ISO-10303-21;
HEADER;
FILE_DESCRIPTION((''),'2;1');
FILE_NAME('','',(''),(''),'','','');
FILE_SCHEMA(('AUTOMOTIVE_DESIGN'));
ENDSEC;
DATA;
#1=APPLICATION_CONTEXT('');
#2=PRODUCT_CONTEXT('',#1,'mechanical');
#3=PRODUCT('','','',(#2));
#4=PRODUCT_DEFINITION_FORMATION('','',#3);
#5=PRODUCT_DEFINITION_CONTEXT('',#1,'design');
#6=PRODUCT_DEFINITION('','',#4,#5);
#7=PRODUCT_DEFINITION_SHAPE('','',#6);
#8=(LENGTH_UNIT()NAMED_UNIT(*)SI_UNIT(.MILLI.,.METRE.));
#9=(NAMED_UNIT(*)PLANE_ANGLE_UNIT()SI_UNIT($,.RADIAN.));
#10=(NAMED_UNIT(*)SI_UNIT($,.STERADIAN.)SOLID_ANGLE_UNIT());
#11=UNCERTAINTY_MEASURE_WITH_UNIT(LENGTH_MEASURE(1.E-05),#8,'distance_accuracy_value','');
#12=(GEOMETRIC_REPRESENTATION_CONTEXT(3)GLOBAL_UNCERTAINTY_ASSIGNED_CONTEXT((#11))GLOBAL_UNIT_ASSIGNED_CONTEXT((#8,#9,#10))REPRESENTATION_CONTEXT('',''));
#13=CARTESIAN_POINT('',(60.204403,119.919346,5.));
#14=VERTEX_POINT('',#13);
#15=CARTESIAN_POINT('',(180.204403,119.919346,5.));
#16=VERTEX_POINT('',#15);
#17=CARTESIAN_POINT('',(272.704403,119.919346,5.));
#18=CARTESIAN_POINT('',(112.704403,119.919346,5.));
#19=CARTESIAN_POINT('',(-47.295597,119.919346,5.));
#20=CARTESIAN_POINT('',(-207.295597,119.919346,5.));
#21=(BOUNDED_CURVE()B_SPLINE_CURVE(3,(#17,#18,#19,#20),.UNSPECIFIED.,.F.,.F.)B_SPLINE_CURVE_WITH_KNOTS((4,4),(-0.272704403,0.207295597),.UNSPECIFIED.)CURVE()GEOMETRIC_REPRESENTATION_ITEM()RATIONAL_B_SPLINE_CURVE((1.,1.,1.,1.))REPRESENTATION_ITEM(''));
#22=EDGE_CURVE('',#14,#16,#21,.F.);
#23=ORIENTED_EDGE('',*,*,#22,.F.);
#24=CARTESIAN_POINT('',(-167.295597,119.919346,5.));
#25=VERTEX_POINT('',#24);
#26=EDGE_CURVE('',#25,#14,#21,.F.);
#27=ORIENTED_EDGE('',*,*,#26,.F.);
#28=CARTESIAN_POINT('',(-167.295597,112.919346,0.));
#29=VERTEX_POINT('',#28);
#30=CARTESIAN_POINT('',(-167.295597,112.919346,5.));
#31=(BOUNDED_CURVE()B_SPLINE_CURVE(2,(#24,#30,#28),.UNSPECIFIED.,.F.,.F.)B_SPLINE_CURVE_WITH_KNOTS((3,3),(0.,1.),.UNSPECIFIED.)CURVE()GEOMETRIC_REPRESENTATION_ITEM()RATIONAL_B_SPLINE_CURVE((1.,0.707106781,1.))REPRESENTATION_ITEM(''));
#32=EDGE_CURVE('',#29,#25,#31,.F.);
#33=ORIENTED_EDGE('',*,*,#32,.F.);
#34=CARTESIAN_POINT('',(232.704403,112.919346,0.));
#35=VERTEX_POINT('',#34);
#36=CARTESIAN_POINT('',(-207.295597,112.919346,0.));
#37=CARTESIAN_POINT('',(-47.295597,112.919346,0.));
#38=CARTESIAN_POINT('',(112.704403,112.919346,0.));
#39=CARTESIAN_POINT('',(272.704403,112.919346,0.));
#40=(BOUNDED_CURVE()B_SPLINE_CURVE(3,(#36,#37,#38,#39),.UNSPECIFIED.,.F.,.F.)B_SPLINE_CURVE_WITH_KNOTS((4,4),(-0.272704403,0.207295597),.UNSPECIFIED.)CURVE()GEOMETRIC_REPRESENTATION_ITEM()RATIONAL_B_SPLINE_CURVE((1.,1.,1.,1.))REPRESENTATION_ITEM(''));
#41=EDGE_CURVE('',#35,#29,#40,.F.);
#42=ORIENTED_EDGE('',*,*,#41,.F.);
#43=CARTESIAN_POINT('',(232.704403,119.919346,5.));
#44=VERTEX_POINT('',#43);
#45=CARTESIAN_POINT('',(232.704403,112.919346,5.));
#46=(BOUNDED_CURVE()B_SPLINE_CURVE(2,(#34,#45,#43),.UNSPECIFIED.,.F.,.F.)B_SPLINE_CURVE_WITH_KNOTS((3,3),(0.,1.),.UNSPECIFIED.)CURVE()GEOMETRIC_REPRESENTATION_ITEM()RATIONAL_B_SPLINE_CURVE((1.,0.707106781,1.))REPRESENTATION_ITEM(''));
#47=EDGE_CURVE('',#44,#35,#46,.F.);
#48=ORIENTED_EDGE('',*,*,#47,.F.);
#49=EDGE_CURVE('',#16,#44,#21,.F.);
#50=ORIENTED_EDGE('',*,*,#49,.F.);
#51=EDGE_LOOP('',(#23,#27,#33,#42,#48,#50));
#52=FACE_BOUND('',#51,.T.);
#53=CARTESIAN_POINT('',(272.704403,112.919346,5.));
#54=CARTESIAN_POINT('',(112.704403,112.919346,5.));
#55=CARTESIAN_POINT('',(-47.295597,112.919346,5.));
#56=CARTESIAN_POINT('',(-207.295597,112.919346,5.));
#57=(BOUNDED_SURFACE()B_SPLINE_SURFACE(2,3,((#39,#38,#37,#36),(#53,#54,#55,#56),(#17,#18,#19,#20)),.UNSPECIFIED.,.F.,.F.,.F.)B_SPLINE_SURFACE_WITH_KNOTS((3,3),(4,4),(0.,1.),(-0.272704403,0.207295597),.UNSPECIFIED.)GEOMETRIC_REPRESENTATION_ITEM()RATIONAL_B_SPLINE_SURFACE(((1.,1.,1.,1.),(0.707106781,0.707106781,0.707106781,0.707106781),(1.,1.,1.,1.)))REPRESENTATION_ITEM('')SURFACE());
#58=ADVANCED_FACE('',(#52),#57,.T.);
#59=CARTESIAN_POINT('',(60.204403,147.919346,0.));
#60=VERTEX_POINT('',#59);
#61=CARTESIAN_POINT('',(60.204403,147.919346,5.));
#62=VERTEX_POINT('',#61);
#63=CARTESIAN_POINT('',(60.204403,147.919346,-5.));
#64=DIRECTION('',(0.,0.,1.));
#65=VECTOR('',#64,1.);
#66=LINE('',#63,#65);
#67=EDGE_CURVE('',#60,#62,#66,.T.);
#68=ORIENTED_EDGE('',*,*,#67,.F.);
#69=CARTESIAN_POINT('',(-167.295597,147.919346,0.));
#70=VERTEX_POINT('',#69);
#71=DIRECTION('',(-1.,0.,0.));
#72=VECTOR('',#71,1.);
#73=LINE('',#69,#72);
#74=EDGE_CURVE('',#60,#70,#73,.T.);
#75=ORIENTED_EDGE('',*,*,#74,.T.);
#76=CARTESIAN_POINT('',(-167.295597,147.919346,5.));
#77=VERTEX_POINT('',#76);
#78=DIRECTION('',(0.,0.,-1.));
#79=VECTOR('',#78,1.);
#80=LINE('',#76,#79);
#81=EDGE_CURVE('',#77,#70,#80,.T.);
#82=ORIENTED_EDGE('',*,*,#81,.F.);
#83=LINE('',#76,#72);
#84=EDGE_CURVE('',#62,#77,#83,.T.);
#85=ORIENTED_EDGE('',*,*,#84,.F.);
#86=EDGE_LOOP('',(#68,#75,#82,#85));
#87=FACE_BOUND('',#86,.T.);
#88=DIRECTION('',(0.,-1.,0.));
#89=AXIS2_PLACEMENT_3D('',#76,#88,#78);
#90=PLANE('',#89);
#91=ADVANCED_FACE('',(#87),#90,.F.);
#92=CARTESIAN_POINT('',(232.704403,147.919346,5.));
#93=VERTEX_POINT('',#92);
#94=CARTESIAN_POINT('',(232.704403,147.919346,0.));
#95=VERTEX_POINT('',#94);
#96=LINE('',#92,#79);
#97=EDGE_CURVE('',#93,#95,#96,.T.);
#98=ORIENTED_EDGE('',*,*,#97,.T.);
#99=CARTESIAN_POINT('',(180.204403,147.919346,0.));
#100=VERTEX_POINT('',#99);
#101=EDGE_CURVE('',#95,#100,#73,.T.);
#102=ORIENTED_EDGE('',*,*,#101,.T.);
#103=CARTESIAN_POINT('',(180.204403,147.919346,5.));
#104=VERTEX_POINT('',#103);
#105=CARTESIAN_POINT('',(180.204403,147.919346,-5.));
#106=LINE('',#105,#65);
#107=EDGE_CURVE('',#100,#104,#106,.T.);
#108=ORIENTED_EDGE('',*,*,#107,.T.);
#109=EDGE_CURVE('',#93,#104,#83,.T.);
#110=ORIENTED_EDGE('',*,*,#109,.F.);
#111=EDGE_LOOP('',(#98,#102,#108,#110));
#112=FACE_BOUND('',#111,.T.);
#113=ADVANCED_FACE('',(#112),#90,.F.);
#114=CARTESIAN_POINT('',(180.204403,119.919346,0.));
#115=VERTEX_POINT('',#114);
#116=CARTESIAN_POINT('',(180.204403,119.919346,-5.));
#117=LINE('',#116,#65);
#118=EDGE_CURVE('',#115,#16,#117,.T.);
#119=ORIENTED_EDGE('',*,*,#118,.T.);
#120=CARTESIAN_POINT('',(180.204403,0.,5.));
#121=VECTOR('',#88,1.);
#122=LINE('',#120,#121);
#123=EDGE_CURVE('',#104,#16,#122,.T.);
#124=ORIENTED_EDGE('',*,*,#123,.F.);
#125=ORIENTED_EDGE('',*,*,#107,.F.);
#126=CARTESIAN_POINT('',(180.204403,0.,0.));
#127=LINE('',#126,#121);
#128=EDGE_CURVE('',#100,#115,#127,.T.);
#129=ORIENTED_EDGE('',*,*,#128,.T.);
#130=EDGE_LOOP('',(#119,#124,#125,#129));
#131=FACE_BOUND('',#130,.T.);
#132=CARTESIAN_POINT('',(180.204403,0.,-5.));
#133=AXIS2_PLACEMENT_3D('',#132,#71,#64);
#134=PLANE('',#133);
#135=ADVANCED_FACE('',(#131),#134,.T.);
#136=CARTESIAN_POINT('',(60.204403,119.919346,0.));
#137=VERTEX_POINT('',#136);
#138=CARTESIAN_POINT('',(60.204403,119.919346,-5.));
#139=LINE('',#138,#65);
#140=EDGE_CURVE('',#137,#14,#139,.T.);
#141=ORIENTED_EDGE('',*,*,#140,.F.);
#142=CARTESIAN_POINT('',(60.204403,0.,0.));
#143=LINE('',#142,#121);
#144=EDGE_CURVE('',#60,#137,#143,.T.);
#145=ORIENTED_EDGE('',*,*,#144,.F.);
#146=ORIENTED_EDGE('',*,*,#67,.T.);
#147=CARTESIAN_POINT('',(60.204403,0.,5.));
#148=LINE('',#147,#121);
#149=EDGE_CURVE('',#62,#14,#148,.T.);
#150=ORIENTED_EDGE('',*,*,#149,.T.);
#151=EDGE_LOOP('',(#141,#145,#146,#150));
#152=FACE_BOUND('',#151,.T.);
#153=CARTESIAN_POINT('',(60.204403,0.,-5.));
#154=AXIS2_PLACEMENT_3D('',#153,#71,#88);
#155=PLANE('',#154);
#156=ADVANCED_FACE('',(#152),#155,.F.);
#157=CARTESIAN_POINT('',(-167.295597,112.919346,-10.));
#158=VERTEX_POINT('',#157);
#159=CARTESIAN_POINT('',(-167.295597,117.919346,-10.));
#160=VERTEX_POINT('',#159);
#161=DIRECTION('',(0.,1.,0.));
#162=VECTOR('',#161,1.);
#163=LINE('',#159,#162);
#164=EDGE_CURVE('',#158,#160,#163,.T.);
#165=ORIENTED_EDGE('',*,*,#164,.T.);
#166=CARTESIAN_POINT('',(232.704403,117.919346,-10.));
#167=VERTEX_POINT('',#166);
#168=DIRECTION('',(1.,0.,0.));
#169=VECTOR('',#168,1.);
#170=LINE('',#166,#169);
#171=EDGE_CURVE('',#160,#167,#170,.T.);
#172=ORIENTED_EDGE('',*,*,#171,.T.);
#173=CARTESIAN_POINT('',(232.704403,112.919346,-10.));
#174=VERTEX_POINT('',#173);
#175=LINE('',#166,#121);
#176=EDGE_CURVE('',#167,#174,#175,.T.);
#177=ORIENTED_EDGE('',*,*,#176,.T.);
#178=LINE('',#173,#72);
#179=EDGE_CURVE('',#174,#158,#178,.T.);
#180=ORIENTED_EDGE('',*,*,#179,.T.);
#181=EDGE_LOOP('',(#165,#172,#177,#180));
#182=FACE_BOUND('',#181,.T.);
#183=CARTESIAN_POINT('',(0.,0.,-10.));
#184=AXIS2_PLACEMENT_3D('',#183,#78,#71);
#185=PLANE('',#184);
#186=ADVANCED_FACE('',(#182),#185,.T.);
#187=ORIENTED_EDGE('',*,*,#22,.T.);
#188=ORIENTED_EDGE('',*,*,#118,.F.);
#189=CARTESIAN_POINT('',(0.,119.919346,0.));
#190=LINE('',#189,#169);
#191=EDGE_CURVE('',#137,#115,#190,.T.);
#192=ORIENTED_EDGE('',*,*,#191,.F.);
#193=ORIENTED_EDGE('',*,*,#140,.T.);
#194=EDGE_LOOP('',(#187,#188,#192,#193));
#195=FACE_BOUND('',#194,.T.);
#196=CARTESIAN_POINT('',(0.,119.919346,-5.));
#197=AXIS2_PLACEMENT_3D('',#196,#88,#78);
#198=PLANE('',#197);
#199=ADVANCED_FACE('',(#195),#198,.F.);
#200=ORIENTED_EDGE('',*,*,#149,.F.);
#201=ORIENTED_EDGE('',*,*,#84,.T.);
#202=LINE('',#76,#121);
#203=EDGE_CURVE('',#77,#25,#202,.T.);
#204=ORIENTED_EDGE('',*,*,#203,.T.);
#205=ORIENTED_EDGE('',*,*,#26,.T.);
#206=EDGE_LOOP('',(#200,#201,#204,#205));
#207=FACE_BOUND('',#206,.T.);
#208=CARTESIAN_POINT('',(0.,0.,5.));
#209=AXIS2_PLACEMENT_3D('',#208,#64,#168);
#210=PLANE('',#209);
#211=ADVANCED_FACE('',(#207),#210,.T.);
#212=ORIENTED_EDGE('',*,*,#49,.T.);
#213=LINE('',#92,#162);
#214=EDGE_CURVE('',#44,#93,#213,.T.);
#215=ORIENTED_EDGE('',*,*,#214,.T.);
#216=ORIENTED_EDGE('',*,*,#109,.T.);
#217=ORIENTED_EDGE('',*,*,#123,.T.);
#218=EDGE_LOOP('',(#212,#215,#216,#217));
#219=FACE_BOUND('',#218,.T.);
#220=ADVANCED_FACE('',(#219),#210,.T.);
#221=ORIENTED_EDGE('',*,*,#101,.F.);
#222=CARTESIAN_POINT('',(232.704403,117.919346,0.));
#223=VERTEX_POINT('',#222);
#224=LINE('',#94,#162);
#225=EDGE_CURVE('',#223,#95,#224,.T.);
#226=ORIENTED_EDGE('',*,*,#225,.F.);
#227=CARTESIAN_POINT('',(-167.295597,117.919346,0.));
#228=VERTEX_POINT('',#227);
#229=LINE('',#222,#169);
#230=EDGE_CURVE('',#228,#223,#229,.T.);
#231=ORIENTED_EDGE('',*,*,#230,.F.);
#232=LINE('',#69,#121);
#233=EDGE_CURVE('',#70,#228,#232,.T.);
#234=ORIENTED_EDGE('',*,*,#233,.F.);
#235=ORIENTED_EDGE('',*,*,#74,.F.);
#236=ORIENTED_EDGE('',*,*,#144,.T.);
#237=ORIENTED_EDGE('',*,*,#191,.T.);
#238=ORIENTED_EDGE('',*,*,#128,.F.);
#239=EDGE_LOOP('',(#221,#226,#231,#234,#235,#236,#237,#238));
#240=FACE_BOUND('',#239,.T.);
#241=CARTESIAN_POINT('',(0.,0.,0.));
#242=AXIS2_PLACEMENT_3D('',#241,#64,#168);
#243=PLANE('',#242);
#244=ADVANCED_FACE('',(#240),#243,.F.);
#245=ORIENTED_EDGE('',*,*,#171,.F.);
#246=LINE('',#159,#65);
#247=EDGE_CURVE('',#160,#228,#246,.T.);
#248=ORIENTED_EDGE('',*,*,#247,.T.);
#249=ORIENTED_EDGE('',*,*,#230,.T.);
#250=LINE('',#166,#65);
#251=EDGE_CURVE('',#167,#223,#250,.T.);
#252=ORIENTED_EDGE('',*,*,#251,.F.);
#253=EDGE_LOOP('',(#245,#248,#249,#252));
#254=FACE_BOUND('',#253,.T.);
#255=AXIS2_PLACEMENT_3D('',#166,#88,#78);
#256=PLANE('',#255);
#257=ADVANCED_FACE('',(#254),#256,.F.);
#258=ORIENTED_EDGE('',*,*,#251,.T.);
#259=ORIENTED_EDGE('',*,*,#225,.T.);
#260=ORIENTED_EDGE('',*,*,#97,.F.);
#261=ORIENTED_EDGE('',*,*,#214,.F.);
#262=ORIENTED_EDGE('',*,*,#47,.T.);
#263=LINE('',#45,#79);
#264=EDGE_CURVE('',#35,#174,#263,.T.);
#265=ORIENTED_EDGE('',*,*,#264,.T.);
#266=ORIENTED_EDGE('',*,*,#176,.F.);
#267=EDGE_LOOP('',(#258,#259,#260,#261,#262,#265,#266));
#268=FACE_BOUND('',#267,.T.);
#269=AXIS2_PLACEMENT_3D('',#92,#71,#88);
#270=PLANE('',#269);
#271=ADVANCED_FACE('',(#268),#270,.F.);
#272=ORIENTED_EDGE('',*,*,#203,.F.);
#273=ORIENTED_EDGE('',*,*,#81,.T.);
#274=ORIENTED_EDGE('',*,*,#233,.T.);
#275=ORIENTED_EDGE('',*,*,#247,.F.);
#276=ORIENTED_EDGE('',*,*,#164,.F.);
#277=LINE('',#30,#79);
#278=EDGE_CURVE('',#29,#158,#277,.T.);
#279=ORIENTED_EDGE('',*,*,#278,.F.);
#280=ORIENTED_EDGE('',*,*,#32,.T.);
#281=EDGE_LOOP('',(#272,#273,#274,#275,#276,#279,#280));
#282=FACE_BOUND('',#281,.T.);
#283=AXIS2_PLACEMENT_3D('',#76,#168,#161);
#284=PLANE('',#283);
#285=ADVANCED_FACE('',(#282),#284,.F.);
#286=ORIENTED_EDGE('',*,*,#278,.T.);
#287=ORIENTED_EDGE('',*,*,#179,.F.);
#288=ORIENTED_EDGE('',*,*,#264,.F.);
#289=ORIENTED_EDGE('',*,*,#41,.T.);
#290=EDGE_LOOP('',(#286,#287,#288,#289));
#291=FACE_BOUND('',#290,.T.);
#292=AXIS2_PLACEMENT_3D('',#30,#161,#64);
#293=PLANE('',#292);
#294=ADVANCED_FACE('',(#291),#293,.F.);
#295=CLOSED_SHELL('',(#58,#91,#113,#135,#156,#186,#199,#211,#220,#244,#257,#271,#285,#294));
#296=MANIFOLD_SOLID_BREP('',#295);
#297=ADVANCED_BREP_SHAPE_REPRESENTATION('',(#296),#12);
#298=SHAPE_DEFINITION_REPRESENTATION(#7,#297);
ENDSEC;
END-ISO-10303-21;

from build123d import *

# Parameters (mm, degrees)
SKETCH_1_W              = 400
SKETCH_1_H              = 35
EXTRUDE_1_DEPTH         = 5
SKETCH_2_W              = 400
SKETCH_2_H              = 5
EXTRUDE_2_DEPTH         = 10
FILLET_1_SIZE           = 7
FILLET_1_SIZE_2         = 5
CUT_EXTRUDE_START       = -5
CUT_EXTRUDE_1_OUTLINE_W = 120
CUT_EXTRUDE_1_OUTLINE_H = 28
CUT_EXTRUDE_1_DEPTH     = 5


# Read off the part's stored shape, not the designer's step: 切除-拉伸1
with BuildPart() as part:
    # 草图1 → 凸台-拉伸1 (new body)
    with BuildSketch(Plane.XY):
        with Locations((32.704402516, 130.419346185)):
            Rectangle(SKETCH_1_W, SKETCH_1_H)
    extrude(amount=EXTRUDE_1_DEPTH)

    # 草图2 → 凸台-拉伸2 (add)
    with BuildSketch(Plane(origin=(0, 0, 0), x_dir=(-1, 0, 0), z_dir=(0, 0, -1))):
        with Locations((-32.704402516, 115.419346185)):
            Rectangle(SKETCH_2_W, SKETCH_2_H)
    extrude(amount=EXTRUDE_2_DEPTH)

    # 圆角1
    # an asymmetric fillet: 7, 5 mm, written as the material it takes off along each edge
    with BuildSketch(Plane(origin=(250.204402516, 112.919346185, 5), x_dir=(0, 1, 0), z_dir=(-1, 0, 0))) as fillet_1_piece_1:
        with BuildLine():
            Bezier((FILLET_1_SIZE, 0), (0, 0), (0, FILLET_1_SIZE_2), weights=[1, 0.707106781, 1])
            Line((0, FILLET_1_SIZE_2), (0, 0))
            Line((0, 0), (FILLET_1_SIZE, 0))
        make_face()
    extrude(amount=435, mode=Mode.SUBTRACT)

    # 切除-拉伸1 outline → 切除-拉伸1 (cut)
    with BuildSketch(Plane.XY.offset(5).offset(CUT_EXTRUDE_START)):
        with Locations((120.204402516, 133.919346185)):
            Rectangle(CUT_EXTRUDE_1_OUTLINE_W, CUT_EXTRUDE_1_OUTLINE_H)
    extrude(amount=CUT_EXTRUDE_1_DEPTH, mode=Mode.SUBTRACT)


solid = part.part
